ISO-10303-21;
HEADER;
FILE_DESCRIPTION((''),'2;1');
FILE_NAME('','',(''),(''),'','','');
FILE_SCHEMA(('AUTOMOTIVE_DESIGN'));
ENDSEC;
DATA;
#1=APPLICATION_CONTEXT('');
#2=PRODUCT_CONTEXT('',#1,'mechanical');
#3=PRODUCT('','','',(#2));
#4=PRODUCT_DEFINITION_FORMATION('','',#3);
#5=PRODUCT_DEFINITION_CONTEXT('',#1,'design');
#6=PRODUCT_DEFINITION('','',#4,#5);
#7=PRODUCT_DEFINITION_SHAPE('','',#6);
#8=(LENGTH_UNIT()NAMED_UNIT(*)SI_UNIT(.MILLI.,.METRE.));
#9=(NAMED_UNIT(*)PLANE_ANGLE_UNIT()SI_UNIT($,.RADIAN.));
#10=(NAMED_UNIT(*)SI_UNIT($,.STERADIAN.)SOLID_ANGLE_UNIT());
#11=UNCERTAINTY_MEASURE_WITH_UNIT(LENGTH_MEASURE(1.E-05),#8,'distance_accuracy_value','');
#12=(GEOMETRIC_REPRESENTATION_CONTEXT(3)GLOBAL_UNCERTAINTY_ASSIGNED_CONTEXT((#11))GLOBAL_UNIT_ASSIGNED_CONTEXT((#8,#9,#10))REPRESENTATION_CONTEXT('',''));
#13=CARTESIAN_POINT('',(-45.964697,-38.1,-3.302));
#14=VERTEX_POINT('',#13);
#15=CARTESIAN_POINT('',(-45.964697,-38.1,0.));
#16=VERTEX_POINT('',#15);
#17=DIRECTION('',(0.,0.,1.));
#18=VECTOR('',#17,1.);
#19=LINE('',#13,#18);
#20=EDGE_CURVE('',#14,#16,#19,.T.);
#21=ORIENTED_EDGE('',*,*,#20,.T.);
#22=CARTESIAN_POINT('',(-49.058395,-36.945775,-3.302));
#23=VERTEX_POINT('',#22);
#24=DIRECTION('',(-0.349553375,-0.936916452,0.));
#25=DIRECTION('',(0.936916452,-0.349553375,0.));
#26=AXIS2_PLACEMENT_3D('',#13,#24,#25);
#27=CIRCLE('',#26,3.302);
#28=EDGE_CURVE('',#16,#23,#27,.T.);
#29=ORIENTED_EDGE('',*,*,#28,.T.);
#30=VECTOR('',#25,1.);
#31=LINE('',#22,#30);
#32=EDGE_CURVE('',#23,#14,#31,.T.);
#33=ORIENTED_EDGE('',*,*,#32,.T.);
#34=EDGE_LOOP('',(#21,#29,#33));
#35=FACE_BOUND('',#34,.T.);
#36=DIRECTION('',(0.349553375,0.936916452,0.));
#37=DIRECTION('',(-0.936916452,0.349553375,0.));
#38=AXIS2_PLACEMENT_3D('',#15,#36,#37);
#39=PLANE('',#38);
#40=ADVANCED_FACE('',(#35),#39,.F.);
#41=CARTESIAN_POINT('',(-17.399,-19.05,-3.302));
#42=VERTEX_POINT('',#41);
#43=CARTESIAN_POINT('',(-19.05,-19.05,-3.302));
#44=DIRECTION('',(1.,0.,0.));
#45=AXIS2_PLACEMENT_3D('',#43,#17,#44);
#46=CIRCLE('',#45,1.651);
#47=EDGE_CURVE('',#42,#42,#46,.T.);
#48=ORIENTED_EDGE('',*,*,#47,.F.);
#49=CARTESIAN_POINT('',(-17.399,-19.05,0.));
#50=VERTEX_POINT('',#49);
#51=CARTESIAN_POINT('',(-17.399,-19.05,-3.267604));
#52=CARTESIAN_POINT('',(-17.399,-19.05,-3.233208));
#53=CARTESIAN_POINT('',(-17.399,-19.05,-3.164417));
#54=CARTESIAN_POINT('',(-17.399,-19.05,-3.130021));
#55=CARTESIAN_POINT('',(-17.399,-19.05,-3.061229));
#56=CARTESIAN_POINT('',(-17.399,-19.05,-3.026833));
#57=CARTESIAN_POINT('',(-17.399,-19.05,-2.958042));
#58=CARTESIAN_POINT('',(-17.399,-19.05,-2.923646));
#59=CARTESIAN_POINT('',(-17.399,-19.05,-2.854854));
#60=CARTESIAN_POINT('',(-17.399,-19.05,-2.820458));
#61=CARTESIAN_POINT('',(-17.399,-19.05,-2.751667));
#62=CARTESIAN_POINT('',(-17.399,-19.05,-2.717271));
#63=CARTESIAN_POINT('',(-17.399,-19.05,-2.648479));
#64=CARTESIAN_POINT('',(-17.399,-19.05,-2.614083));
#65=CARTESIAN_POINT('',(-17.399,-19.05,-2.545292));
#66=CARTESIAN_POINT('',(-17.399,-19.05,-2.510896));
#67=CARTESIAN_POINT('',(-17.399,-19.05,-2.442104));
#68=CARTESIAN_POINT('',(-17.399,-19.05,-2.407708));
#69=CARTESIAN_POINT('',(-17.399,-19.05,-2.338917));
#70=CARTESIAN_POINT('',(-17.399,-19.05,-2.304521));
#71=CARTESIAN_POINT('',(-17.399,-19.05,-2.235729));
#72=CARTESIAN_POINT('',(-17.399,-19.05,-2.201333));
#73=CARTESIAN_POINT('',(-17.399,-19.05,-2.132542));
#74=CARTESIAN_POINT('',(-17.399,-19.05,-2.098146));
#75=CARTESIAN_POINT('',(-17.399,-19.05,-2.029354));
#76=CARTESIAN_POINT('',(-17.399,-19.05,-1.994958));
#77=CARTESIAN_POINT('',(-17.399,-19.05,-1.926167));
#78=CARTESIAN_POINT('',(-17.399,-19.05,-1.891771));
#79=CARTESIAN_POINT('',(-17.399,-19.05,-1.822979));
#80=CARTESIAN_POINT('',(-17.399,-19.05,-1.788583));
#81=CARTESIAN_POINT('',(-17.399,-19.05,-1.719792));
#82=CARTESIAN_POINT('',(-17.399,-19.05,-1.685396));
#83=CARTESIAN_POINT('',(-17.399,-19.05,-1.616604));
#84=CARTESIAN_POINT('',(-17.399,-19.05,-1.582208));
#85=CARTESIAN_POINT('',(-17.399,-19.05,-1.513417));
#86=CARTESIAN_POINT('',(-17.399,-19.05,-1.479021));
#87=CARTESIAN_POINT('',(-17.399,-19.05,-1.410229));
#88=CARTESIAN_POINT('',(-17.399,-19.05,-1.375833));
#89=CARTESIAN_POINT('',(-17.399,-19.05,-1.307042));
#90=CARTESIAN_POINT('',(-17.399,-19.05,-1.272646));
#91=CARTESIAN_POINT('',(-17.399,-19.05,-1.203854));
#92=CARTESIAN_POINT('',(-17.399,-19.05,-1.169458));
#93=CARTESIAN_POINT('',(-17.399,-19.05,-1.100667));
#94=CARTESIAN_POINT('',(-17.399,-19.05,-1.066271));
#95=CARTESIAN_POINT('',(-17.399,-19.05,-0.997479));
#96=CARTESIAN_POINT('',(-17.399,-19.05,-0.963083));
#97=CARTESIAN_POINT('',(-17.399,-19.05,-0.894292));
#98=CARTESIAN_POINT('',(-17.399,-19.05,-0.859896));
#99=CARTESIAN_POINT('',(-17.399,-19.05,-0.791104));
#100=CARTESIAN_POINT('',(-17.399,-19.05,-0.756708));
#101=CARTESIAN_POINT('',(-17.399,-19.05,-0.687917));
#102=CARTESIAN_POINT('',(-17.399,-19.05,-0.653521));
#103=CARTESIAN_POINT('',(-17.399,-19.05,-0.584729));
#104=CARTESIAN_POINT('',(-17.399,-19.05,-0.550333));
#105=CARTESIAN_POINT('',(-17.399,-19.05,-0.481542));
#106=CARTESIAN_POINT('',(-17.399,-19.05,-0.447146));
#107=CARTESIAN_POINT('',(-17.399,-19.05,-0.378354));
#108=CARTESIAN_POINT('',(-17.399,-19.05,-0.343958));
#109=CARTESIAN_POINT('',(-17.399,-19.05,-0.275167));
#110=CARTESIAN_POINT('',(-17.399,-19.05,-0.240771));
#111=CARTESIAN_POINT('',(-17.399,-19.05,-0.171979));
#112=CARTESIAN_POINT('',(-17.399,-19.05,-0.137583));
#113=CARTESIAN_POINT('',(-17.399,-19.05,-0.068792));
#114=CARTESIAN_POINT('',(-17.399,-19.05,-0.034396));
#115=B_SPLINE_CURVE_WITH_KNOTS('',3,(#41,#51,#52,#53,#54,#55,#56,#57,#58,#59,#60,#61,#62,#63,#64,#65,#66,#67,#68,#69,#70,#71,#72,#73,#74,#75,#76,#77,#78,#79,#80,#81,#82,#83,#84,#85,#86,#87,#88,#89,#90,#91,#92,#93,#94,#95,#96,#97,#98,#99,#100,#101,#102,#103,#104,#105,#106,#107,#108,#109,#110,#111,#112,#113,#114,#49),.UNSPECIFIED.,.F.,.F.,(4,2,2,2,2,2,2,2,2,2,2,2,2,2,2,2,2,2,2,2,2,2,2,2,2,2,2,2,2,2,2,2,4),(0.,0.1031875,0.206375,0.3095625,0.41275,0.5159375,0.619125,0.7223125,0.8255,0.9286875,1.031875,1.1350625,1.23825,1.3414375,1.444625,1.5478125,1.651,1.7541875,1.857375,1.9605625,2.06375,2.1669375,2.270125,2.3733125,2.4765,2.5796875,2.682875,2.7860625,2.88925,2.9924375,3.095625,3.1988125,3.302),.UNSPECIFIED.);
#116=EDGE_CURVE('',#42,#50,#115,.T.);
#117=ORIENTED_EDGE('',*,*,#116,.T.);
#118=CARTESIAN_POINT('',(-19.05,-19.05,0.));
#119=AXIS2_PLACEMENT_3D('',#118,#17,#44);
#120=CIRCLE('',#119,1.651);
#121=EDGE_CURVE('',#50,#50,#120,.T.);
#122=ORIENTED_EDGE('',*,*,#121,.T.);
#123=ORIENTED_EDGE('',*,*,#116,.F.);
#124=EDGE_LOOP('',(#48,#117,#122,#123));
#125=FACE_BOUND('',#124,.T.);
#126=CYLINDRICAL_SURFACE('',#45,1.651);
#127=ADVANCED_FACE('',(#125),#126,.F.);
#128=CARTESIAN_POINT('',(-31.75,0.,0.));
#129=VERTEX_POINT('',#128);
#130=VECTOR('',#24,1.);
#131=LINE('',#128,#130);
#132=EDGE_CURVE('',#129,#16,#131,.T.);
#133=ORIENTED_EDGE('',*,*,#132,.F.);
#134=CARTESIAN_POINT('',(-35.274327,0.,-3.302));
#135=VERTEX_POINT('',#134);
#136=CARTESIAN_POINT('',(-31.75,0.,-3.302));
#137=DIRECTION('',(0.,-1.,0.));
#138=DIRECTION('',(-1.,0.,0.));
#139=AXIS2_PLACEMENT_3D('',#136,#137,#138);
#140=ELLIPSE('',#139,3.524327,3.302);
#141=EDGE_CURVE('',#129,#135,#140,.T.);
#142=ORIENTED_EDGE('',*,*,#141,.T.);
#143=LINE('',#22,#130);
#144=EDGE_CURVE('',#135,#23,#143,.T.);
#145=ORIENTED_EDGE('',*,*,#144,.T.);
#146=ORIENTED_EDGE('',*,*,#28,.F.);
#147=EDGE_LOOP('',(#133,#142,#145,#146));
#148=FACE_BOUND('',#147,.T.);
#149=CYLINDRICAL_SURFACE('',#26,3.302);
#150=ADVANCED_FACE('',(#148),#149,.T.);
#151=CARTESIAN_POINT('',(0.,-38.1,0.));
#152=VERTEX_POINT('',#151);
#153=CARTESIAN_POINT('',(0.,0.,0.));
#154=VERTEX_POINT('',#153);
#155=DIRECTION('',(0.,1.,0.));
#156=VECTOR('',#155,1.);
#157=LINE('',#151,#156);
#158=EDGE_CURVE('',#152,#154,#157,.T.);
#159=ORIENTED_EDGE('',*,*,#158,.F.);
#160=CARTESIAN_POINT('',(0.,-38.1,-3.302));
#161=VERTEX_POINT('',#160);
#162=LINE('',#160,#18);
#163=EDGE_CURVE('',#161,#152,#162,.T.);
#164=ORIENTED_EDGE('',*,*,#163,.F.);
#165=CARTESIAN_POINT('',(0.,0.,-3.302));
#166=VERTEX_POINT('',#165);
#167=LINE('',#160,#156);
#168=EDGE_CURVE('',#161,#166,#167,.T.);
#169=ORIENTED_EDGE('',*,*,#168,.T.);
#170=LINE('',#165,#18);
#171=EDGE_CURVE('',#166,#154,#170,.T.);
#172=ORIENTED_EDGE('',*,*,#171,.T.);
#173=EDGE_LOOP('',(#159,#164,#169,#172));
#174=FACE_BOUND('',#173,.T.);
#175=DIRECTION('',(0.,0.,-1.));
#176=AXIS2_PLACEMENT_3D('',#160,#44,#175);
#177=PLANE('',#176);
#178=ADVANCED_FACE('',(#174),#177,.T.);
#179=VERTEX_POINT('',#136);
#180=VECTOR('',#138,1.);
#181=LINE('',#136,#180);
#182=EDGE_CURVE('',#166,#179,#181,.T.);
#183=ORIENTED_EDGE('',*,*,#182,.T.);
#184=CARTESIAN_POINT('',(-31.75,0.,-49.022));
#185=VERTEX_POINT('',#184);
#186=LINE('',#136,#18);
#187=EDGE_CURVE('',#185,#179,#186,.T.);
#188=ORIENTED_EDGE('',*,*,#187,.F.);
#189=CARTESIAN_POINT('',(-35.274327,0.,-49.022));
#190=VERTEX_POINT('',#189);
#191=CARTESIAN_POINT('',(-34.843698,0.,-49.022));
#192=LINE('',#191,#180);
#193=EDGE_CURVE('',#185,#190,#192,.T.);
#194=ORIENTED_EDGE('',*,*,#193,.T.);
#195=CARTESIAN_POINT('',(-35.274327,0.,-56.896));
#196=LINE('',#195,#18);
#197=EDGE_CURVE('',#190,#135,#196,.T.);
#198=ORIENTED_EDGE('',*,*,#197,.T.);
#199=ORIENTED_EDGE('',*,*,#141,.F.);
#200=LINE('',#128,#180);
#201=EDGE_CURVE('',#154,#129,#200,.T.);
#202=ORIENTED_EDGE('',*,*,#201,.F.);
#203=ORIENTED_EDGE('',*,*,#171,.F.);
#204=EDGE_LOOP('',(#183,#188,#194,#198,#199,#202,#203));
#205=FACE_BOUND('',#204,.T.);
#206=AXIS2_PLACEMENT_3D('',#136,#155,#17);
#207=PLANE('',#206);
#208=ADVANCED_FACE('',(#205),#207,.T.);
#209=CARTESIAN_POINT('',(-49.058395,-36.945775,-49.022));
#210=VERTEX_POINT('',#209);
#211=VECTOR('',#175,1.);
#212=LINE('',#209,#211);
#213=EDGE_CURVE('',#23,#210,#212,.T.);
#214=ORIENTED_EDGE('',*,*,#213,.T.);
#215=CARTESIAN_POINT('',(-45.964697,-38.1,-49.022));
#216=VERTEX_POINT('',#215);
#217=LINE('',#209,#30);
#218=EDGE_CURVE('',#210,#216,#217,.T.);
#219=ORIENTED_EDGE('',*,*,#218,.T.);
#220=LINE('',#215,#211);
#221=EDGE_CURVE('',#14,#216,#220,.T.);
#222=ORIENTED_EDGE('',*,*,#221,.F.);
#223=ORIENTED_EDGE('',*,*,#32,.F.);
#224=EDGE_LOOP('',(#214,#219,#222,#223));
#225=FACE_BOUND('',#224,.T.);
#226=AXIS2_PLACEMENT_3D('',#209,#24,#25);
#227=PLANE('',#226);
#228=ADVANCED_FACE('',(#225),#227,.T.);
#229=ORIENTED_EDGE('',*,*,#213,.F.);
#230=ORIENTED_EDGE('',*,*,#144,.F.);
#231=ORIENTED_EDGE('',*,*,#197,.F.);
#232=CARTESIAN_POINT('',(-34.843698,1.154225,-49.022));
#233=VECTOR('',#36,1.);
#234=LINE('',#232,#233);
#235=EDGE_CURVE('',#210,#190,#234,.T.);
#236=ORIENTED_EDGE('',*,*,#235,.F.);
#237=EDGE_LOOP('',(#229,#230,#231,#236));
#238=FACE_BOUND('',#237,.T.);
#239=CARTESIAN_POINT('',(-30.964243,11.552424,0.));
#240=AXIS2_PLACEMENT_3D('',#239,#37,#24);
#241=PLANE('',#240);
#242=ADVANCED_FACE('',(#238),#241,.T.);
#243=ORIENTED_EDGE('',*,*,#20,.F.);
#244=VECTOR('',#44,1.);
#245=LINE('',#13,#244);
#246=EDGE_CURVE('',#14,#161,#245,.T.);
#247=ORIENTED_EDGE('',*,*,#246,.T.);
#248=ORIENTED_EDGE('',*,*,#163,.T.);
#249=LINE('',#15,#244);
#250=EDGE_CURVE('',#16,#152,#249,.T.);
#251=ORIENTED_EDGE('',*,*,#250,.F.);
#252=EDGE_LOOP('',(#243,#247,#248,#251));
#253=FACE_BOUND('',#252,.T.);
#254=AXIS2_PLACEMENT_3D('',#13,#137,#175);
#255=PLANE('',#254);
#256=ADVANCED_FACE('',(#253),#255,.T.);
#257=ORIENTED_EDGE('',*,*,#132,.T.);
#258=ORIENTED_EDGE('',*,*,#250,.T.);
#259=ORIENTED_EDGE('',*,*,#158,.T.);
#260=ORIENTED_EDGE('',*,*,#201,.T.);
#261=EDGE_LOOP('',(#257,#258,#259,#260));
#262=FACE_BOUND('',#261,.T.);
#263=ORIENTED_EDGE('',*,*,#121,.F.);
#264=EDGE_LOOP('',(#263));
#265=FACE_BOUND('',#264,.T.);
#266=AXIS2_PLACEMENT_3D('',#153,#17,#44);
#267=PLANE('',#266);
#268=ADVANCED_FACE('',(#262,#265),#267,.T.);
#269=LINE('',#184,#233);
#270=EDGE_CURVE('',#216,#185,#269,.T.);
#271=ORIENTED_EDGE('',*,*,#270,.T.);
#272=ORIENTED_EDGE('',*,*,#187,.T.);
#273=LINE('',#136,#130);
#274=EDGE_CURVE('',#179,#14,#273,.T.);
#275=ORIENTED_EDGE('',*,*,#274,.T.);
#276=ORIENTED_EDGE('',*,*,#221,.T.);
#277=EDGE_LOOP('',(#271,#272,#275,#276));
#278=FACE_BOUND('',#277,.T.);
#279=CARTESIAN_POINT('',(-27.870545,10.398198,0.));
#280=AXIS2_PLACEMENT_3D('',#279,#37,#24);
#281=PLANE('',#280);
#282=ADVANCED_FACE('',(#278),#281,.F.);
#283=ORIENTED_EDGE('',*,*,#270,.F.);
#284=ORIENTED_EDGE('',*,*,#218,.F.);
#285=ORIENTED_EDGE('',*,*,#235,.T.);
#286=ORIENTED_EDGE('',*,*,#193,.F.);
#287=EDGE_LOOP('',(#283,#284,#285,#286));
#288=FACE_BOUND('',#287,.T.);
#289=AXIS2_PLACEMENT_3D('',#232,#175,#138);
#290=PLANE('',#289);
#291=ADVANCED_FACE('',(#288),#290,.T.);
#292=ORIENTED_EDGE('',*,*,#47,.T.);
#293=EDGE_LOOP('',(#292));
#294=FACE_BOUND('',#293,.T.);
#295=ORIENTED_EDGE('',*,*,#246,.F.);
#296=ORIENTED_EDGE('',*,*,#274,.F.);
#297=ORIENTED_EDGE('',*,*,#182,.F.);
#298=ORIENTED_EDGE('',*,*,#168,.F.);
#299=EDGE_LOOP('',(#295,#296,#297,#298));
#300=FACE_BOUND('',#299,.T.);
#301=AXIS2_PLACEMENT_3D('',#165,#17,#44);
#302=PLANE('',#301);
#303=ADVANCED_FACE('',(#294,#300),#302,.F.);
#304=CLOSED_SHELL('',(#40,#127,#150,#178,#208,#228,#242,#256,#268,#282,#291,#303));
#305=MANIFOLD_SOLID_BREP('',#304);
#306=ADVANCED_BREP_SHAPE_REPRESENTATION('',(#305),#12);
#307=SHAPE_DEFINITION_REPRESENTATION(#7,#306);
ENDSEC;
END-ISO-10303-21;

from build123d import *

# Parameters (mm, degrees)
SKETCH13_R              = 1.651
BASE_FLANGE5_DEPTH      = 3.302
EDGE_FLANGE4_START      = -51.763631849
EDGE_FLANGE4_DEPTH      = 40.665312179
CUT_EXTRUDE4_DEPTH      = 4.699
CUT_EXTRUDE4_DEPTH_BACK = 56.896


# Read off the part's stored shape, not the designer's step: Edge-Flange4
# Sheet-metal steps are written as plain solids
with BuildPart() as part:
    # Sketch13 → Base-Flange5 (new body)
    with BuildSketch(Plane.XY):
        Polygon((-31.75, 0), (0, 0), (0, -38.1), (-45.964697135, -38.1), align=None)
        with Locations((-19.05, -19.05)):
            Circle(SKETCH13_R, mode=Mode.SUBTRACT)
    extrude(amount=-BASE_FLANGE5_DEPTH)

    # Edge-Flange4 outline → Edge-Flange4 (add)
    with BuildSketch(Plane(origin=(0, 0, 0), x_dir=(0.9369164518419233, -0.34955337542060905, 0), z_dir=(0.34955337542060905, 0.9369164518419232, 0)).offset(EDGE_FLANGE4_START)):
        with BuildLine():
            ThreePointArc((-33.049097346, 3.302), (-32.081963937, 0.967133409), (-29.747097346, 0))
            Line((-29.747097346, 0), (-29.747097346, 49.022))
            Line((-29.747097346, 49.022), (-33.049097346, 49.022))
            Line((-33.049097346, 49.022), (-33.049097346, 3.302))
        make_face()
    extrude(amount=EDGE_FLANGE4_DEPTH)

    # Sketch51 → Cut-Extrude4 (cut, two sides: drawn at the far end of the back side and taken through both)
    with BuildSketch(Plane.XY.offset(-CUT_EXTRUDE4_DEPTH_BACK)):
        Polygon((-31.75, 0), (-35.274327056, 0), (-34.843698124, 1.154225246), align=None)
    extrude(amount=CUT_EXTRUDE4_DEPTH + CUT_EXTRUDE4_DEPTH_BACK, mode=Mode.SUBTRACT)


solid = part.part
